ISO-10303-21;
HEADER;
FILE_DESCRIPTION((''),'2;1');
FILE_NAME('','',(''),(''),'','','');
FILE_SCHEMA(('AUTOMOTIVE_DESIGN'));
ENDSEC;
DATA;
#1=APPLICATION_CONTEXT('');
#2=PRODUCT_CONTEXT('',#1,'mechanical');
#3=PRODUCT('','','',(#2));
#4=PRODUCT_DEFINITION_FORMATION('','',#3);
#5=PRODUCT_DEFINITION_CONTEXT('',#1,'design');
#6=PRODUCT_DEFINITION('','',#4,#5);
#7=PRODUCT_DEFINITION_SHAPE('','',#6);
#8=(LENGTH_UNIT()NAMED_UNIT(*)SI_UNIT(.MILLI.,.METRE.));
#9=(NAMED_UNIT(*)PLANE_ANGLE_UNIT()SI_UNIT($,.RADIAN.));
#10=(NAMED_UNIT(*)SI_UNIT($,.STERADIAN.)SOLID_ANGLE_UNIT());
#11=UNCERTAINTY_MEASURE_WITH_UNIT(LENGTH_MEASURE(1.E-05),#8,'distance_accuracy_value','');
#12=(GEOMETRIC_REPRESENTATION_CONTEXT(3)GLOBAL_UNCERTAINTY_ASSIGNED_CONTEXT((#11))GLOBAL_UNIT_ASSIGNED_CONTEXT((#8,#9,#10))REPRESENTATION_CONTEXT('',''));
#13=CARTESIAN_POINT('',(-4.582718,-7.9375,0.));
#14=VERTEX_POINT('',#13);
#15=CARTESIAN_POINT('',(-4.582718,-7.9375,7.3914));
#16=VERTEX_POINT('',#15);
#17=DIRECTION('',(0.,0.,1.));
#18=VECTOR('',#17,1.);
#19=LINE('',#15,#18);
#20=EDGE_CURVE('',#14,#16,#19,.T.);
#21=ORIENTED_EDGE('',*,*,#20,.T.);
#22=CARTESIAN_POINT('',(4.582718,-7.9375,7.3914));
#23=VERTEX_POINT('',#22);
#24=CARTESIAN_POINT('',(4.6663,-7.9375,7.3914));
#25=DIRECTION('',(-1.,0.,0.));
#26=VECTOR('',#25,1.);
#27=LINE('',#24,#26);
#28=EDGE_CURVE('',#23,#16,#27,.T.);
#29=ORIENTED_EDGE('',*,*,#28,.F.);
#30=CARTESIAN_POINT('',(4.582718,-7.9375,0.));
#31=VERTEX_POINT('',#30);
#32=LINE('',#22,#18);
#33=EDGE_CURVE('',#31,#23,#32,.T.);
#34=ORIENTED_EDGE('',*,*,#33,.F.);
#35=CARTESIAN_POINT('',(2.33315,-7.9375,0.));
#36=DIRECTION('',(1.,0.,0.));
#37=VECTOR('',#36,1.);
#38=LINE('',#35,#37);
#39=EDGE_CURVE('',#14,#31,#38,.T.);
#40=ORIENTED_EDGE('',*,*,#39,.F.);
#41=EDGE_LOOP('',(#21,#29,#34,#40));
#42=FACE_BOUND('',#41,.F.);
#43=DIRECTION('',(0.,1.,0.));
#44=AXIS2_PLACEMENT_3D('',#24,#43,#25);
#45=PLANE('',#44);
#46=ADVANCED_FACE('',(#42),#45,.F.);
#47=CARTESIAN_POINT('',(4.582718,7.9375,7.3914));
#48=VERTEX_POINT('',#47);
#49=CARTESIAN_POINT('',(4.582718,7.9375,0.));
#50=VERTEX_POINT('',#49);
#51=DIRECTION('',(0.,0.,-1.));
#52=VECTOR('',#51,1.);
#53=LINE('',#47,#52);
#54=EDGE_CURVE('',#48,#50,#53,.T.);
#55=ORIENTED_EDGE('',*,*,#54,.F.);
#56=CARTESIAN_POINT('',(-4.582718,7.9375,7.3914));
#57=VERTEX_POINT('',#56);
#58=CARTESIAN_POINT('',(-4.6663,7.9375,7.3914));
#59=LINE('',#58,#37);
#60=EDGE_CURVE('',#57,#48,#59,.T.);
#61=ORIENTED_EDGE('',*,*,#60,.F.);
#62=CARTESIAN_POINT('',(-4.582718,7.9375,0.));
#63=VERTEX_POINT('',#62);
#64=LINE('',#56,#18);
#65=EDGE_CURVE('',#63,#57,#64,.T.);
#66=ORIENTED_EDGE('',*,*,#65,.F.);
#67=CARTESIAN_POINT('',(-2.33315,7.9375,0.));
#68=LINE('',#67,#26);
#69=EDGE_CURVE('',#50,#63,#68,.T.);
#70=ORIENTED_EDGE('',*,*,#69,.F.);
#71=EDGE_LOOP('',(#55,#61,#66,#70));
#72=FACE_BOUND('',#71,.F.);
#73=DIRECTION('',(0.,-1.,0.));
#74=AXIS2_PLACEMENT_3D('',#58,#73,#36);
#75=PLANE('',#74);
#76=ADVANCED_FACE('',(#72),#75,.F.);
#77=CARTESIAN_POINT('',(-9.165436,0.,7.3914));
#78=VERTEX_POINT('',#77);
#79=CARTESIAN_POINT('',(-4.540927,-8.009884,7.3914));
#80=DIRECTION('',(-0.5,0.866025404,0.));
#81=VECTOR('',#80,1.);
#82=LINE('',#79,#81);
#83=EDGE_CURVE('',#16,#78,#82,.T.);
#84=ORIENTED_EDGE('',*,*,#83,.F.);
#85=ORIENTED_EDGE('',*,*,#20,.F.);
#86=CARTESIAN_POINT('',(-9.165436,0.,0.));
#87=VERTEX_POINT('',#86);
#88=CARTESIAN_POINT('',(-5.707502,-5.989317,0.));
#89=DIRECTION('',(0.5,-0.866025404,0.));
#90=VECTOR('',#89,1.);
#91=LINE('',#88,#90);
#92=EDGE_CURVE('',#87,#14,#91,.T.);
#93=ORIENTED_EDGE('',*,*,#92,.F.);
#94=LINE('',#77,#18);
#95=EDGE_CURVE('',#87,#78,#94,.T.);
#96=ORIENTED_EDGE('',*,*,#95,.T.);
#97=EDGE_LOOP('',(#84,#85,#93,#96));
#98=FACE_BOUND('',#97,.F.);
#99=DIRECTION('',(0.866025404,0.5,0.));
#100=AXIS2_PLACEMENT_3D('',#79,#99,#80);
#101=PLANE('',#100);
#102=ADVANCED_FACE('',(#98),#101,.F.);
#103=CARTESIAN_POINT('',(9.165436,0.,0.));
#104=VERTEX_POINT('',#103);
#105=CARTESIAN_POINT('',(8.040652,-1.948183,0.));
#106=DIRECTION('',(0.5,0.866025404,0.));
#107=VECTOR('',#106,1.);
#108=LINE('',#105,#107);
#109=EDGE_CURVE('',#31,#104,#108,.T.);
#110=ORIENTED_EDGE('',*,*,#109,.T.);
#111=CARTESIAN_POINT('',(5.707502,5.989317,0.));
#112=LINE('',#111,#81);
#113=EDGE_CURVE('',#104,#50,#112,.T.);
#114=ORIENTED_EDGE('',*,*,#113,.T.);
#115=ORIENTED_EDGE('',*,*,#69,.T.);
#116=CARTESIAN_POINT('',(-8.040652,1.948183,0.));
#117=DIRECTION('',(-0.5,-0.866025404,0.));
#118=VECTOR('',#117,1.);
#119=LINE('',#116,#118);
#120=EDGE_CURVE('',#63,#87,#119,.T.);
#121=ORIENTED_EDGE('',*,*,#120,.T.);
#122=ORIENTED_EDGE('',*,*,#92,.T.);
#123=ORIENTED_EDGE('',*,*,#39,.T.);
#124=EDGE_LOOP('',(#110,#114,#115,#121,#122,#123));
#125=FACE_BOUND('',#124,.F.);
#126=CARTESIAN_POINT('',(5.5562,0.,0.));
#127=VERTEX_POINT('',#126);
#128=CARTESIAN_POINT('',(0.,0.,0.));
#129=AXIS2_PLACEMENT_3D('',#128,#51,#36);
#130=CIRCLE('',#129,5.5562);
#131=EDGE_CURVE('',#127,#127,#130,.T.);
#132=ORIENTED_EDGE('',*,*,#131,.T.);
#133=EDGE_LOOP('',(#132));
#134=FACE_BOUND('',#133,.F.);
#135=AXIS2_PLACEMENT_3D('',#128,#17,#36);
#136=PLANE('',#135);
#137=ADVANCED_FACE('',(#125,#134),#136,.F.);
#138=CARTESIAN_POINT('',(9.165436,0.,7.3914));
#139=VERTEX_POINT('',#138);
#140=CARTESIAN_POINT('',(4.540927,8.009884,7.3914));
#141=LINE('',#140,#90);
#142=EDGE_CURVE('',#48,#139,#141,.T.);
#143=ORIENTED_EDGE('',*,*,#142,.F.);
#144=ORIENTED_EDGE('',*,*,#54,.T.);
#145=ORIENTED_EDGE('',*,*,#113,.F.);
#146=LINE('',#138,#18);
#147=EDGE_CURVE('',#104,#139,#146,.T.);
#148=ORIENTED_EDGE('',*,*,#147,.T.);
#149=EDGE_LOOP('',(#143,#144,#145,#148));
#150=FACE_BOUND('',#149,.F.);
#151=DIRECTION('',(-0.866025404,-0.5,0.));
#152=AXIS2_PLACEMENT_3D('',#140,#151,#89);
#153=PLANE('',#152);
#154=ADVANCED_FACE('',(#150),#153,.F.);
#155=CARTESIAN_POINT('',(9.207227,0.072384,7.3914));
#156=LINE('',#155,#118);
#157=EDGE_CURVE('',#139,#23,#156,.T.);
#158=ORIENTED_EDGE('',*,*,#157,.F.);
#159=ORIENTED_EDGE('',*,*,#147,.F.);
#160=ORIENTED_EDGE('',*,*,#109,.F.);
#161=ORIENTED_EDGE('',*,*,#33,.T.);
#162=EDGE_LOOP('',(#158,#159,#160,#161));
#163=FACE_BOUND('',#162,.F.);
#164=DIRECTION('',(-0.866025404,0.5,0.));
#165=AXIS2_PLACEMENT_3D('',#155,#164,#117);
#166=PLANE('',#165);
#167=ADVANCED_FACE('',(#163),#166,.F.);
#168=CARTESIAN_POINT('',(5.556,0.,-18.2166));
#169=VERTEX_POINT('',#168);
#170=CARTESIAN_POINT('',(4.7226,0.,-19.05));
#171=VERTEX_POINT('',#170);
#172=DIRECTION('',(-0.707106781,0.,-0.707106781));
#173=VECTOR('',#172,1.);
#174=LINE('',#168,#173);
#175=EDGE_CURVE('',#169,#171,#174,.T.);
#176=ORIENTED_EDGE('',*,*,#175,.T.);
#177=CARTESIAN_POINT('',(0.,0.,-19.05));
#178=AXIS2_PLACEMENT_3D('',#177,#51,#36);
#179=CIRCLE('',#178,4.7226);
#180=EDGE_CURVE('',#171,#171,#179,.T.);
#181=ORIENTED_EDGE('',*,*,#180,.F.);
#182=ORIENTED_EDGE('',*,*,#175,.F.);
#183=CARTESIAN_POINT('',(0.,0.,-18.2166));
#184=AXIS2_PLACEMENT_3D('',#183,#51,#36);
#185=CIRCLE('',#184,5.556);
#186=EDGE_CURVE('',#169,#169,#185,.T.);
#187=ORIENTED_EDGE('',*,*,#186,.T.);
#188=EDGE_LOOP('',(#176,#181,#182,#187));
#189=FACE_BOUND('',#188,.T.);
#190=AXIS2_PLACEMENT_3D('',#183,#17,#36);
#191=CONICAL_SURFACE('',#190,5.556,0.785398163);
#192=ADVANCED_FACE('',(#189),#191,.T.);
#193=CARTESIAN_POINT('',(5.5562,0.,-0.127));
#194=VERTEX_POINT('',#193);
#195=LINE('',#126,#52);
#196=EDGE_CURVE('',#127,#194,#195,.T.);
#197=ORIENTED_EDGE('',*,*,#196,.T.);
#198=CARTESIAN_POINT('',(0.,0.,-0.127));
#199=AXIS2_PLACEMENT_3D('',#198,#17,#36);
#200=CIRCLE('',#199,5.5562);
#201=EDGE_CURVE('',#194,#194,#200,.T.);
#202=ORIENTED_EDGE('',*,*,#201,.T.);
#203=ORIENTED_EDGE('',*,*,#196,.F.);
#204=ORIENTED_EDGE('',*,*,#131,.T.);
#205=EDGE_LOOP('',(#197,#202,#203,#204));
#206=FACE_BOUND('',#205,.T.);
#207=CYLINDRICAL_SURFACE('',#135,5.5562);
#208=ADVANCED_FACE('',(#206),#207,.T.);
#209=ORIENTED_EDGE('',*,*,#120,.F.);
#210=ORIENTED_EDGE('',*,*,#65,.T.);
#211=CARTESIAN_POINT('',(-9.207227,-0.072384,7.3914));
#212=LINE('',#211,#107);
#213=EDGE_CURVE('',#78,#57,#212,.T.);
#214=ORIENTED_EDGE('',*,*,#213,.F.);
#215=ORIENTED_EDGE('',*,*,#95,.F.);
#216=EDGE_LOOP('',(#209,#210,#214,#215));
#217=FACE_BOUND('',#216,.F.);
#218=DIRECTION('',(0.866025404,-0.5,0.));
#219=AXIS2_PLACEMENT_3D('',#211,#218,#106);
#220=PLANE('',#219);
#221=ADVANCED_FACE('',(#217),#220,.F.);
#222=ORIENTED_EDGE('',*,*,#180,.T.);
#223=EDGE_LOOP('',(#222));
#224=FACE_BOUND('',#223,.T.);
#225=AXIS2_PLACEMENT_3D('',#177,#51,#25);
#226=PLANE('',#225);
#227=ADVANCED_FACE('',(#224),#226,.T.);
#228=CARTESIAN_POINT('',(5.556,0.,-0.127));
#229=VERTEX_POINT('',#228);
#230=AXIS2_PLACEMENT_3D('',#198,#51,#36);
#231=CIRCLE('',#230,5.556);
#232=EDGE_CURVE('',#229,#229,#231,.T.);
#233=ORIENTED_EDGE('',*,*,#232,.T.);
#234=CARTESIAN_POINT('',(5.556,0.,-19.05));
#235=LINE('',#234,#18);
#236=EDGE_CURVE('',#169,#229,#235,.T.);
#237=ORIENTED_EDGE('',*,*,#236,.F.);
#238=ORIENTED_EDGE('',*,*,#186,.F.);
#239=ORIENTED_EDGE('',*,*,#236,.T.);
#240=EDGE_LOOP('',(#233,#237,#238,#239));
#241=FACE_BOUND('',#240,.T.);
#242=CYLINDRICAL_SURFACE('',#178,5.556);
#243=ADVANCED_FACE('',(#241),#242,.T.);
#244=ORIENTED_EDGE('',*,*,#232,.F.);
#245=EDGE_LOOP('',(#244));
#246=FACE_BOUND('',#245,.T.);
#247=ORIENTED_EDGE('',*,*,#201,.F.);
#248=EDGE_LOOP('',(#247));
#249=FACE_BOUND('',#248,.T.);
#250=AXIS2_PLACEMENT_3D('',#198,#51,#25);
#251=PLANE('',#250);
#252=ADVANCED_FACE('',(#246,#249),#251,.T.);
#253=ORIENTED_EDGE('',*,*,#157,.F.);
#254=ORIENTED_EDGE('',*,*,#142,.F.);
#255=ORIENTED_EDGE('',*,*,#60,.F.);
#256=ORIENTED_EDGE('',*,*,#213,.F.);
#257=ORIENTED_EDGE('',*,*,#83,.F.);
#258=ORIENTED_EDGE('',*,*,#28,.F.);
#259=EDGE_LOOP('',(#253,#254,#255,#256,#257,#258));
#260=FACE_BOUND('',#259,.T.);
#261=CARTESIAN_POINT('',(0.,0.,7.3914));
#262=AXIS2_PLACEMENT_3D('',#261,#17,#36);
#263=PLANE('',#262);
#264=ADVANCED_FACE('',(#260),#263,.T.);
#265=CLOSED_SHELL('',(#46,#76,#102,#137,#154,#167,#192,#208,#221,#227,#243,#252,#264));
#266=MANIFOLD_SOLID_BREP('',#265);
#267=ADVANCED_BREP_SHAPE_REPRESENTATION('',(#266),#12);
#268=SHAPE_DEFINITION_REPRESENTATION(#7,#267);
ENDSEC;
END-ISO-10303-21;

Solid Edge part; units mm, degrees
sketch "Sketch1" plane through (0, 0, 0) normal (0, 0, 1) x (1, 0, 0)
  circle A0 centre (0, 0) radius 9.2075
  dimension "D1" = 18.415
extrude "Protrusion1" add sketch "Sketch1" along normal blind 7.3914
sketch "Sketch2" plane through (0, 0, 0) normal (0, 0, -1) x (1, 0, 0)
  circle A0 centre (0, 0) radius 5.5562
extrude "Protrusion2" add sketch "Sketch2" along normal blind 19.05
sketch "Sketch3" plane through (0, 0, -19.05) normal (0, 0, -1) x (1, 0, 0)
  circle A0 centre (0, 0) radius 5.556
extrude "Cutout1" cut sketch "Sketch3" against normal blind 18.923 flip side to cut
chamfer "Chamfer_1" distance 0.8334 angle 45 1 edges at (-5.556, 0, -19.05)
sketch "Sketch4" plane through (0, 0, 7.3914) normal (0, 0, 1) x (1, 0, 0)
  line L0 (-4.6663, 7.9375) -> (4.6663, 7.9375)
  dimension "D1" = 15.875
extrude "Cutout2" cut sketch "Sketch4" against normal up to next material side at (0, 7.9875, 7.3914)
pattern_circular "Pattern1" count 6 over 360 about axis through (0, 0, 7.3914) along (0, 0, 1) of "Cutout2"
properties part number "24100090"
